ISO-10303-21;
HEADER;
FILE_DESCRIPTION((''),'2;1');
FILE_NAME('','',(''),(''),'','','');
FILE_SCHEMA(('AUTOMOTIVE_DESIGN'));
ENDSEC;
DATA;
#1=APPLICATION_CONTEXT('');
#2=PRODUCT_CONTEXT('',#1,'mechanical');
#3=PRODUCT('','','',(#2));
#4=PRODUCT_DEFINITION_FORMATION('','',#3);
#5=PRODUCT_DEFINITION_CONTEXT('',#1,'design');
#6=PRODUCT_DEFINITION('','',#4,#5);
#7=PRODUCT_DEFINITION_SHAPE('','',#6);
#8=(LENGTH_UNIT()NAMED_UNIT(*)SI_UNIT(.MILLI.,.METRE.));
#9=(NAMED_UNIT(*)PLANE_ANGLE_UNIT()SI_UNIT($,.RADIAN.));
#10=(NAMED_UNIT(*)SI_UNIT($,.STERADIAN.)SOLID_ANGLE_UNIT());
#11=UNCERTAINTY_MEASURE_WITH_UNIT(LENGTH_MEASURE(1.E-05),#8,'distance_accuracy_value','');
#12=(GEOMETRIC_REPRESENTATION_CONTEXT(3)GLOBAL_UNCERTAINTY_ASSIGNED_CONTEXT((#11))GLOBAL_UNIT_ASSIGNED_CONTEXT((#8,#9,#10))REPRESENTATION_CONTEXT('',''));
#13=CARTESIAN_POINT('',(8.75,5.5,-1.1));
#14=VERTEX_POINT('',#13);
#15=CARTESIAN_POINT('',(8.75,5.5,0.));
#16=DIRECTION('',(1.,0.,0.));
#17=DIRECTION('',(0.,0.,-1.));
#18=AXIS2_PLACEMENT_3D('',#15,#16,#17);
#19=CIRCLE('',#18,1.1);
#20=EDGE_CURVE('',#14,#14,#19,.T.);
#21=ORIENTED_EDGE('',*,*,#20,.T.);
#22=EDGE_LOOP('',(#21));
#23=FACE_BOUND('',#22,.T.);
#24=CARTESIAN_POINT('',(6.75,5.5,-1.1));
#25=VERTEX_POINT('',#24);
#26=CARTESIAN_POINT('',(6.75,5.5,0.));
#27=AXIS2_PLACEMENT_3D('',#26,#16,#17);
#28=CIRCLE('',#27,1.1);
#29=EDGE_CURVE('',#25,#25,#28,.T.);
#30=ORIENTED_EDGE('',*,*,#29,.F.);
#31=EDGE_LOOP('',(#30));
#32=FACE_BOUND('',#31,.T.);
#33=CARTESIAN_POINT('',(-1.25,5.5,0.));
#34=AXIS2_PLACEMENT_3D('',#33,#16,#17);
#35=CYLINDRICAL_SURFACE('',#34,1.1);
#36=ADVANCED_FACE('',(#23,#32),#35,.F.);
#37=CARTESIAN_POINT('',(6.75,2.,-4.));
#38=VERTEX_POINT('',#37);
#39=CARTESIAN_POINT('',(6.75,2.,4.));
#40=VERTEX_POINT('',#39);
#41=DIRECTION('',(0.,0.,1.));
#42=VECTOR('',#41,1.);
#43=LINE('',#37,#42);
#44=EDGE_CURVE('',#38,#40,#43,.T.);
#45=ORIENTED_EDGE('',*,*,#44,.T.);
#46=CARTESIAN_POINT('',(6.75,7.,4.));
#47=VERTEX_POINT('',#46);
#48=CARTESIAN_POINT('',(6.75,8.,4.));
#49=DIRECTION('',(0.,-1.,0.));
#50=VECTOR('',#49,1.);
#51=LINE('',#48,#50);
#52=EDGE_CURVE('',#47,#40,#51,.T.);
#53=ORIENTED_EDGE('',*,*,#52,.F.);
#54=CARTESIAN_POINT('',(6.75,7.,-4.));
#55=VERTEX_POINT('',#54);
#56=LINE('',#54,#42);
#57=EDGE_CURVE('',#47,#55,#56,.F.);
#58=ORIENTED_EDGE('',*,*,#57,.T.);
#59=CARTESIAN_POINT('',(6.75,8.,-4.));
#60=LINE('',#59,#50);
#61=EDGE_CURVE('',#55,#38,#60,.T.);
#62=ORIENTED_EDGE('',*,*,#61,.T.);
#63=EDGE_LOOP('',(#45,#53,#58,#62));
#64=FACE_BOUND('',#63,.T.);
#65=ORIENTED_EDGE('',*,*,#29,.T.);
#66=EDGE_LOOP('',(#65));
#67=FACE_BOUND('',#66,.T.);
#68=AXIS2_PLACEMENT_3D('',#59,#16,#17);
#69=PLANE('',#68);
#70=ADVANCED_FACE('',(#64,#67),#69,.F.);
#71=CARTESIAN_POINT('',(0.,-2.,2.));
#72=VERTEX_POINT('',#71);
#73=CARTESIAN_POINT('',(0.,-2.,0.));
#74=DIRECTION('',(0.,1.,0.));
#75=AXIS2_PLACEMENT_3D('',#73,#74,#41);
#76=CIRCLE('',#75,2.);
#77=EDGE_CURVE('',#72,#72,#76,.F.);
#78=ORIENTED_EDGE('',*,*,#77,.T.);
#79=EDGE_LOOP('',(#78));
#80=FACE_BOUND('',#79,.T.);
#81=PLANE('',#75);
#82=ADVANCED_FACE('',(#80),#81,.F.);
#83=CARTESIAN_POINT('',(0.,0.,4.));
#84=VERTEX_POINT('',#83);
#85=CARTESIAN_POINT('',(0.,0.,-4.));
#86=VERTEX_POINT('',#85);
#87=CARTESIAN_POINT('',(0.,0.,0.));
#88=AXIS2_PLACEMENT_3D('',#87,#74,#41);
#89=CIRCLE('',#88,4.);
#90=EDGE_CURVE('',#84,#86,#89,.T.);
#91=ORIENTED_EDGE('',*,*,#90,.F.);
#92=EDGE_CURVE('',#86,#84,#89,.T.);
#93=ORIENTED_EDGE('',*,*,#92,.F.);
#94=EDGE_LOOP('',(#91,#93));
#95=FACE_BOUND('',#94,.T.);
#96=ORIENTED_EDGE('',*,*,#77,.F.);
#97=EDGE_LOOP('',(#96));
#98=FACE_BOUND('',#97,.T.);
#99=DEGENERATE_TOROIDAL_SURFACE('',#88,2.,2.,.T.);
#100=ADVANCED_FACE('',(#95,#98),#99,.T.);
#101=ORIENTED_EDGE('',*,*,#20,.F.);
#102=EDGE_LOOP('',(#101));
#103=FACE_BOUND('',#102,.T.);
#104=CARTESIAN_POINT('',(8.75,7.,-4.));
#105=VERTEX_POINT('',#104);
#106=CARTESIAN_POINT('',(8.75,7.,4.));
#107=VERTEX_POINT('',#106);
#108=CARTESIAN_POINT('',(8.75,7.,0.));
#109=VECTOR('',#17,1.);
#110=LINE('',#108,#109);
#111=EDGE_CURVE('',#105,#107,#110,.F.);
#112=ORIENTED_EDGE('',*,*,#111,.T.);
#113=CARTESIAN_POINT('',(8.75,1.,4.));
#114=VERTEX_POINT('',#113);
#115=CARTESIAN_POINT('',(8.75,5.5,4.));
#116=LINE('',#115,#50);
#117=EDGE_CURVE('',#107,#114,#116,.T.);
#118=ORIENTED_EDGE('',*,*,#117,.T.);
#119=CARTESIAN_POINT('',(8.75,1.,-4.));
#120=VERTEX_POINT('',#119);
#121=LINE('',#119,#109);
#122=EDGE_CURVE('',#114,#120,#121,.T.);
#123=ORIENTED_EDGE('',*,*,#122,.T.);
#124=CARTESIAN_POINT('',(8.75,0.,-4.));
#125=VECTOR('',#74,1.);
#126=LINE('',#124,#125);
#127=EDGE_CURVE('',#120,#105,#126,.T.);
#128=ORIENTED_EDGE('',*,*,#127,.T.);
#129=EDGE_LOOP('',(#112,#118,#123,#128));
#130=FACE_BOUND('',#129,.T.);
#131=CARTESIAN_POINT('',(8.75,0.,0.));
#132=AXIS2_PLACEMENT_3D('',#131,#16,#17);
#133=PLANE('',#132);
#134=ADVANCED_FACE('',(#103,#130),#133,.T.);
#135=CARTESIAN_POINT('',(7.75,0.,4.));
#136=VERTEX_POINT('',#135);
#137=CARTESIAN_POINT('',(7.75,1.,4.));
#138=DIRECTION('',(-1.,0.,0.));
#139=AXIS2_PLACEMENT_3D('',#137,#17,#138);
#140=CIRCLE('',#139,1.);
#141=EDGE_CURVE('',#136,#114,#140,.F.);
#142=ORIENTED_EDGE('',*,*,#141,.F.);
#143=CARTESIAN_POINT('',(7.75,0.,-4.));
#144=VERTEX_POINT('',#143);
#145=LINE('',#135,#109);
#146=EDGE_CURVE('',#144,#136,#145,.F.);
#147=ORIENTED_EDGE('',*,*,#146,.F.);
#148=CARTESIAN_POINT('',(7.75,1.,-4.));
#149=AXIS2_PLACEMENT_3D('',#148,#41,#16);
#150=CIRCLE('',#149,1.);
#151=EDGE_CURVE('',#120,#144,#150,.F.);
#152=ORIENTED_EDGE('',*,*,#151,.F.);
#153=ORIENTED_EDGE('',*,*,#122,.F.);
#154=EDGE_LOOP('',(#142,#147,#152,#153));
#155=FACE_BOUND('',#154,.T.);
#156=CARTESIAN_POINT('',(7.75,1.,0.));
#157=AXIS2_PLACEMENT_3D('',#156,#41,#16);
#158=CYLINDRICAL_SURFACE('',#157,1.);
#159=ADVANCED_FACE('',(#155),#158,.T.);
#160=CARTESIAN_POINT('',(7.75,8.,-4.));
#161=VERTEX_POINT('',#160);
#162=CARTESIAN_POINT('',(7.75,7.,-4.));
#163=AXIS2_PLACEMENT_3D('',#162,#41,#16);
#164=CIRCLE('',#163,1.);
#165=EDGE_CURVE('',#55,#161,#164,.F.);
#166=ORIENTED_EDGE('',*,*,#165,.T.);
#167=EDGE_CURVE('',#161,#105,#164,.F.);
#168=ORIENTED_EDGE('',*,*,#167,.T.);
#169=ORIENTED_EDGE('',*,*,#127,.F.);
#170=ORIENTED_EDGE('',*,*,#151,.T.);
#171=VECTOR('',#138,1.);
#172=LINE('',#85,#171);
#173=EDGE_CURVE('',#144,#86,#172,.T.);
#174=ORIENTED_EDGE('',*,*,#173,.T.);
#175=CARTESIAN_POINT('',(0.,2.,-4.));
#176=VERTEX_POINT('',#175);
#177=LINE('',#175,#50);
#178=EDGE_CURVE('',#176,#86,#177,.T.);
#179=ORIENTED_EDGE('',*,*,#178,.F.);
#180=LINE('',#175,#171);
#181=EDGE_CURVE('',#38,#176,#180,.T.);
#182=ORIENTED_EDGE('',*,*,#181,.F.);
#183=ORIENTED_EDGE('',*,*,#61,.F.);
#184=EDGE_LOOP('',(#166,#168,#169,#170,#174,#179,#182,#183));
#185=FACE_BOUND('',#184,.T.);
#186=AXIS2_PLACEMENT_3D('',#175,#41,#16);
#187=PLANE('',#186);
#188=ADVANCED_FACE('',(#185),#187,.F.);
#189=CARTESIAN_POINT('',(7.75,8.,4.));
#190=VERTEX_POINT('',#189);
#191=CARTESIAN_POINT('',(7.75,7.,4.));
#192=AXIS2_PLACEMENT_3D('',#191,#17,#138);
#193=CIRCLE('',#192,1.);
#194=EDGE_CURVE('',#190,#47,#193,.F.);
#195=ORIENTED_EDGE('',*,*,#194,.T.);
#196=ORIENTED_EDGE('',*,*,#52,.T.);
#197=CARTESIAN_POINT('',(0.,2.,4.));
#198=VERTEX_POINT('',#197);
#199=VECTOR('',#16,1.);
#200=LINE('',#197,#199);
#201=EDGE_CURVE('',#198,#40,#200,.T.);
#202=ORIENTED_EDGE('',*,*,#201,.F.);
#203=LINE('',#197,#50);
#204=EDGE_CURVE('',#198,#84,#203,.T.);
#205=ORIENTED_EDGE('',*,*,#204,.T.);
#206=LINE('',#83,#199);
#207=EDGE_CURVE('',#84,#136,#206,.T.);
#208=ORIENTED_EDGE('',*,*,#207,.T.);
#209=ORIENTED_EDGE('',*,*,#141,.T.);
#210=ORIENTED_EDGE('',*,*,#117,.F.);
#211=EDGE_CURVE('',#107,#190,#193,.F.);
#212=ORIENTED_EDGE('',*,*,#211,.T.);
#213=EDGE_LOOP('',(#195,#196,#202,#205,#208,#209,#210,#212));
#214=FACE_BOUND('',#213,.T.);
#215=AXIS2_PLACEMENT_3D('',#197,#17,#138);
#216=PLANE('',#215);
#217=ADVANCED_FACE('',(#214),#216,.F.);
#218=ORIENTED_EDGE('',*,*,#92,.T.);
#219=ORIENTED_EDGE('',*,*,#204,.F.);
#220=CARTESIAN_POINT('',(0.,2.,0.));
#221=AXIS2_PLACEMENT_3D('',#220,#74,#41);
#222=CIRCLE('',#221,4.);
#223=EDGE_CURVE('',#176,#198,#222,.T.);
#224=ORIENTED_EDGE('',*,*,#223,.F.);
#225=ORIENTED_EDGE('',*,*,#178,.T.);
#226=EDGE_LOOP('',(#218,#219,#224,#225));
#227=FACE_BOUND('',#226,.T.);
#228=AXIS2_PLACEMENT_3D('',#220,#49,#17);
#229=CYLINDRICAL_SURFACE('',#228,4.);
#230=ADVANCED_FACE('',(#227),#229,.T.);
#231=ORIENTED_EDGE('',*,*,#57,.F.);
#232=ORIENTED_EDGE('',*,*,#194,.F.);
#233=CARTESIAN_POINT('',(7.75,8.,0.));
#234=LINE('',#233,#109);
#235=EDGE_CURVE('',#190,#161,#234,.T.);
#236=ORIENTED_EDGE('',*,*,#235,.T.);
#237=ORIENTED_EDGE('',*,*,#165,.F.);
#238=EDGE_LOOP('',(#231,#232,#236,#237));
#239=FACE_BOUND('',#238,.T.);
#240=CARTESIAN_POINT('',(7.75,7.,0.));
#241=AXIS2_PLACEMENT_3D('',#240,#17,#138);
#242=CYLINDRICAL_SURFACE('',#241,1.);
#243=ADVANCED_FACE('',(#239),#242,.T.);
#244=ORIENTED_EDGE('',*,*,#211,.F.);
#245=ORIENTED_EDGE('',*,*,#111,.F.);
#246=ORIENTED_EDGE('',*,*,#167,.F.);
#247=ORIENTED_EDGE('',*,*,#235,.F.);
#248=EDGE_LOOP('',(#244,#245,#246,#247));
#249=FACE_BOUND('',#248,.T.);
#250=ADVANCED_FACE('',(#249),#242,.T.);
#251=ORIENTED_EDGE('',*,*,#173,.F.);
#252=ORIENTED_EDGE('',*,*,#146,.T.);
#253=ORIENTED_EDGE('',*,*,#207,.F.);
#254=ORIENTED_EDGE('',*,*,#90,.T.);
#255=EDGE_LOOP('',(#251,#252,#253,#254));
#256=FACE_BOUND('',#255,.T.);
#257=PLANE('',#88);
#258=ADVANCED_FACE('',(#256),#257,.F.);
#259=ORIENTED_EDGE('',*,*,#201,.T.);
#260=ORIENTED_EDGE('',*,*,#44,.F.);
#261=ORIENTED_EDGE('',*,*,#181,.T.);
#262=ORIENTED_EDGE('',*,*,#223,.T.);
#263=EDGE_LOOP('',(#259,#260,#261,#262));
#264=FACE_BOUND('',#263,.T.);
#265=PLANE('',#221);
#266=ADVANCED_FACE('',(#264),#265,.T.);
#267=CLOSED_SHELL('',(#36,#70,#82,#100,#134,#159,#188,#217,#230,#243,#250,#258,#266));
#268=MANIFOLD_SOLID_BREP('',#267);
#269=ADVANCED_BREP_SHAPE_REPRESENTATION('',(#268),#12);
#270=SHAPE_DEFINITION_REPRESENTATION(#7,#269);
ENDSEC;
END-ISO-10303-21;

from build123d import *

# Parameters (mm, degrees)
SKETCH_1_R          = 2.525
EXTRUDE_1_DEPTH     = 2
EXTRUDE_START       = -2
SKETCH_2_R          = 2.525
EXTRUDE_2_DEPTH     = 2
SKETCH_3_R          = 4
EXTRUDE_3_DEPTH     = 2
EXTRUDE_6_DEPTH     = 8
SKETCH_11_R         = 1.05
CUT_EXTRUDE_1_DEPTH = 28.51931143
FILLET_3_R          = 1
SKETCH_12_W         = 8
SKETCH_12_H         = 5.5
CUT_EXTRUDE_2_DEPTH = 17
SKETCH_13_W         = 2
SKETCH_13_H         = 8
EXTRUDE_7_DEPTH     = 6
FILLET_4_R          = 1
FILLET_5_R          = 1
SKETCH_14_R         = 1.1
CUT_EXTRUDE_3_DEPTH = 10


with BuildPart() as part:
    # 草图1 → 凸台-拉伸1 (new body)
    with BuildSketch(Plane(origin=(0, 0, 0), x_dir=(1, 0, 0), z_dir=(0, 1, 0))):
        with BuildLine():
            Line((0, 4), (25.75, 4))
            Line((25.75, 4), (25.75, -4))
            Line((25.75, -4), (0, -4))
            ThreePointArc((0, -4), (-4, 0), (0, 4))
        make_face()
        with Locations(Location((0, 0, 0), (0, 0, 270))):
            Circle(SKETCH_1_R, mode=Mode.SUBTRACT)
    extrude(amount=EXTRUDE_1_DEPTH)

    # 草图2 → 凸台-拉伸2 (add)
    with BuildSketch(Plane(origin=(0, 2, 0), x_dir=(1, 0, 0), z_dir=(0, 1, 0)).offset(EXTRUDE_START)):
        Circle(SKETCH_2_R)
    extrude(amount=EXTRUDE_2_DEPTH)

    # 草图3 → 凸台-拉伸3 (add)
    with BuildSketch(Plane(origin=(0, 0, 0), x_dir=(1, 0, 0), z_dir=(0, 1, 0)).offset(EXTRUDE_START)):
        with Locations(Location((0, 0, 0), (0, 0, 270))):
            Circle(SKETCH_3_R)
    extrude(amount=EXTRUDE_3_DEPTH)

    # 圆角2: read off the stored shape, not the designer's step
    # 圆角2 outline → 圆角2 (revolve, cut)
    with BuildSketch(Plane.XY):
        with BuildLine():
            ThreePointArc((4, 0), (3.414213562, -1.414213562), (2, -2))
            Line((2, -2), (4, -2))
            Line((4, -2), (4, 0))
        make_face()
    revolve(axis=Axis((0, 0, 0), (0, 1, 0)), mode=Mode.SUBTRACT)

    # 草图10 → 凸台-拉伸6 (add)
    with BuildSketch(Plane(origin=(0, 0, -4), x_dir=(-1, 0, 0), z_dir=(0, 0, -1))):
        with BuildLine():
            Line((-25.75, 2), (-25.75, 4))
            ThreePointArc((-25.75, 4), (-24.25, 5.5), (-22.75, 4))
            Line((-22.75, 4), (-22.75, 2))
            Line((-22.75, 2), (-25.75, 2))
        make_face()
        with BuildLine():
            Line((-18.75, 2), (-15.75, 2))
            Line((-15.75, 2), (-15.75, 4))
            ThreePointArc((-15.75, 4), (-17.25, 5.5), (-18.75, 4))
            Line((-18.75, 4), (-18.75, 2))
        make_face()
    extrude(amount=-EXTRUDE_6_DEPTH)

    # 草图11 → 切除-拉伸1 (cut, through all)
    with BuildSketch(Plane(origin=(0, 0, -4), x_dir=(-1, 0, 0), z_dir=(0, 0, -1))):
        with Locations((-17.25, 4)):
            Circle(SKETCH_11_R)
        with Locations((-24.25, 4)):
            Circle(SKETCH_11_R)
    extrude(amount=-CUT_EXTRUDE_1_DEPTH, mode=Mode.SUBTRACT)

    # 圆角3
    fillet_3_edges = [part.edges().sort_by_distance(p)[0] for p in [
        (25.75, 0, 0),
    ]]
    fillet(fillet_3_edges, radius=FILLET_3_R)

    # 草图12 → 切除-拉伸2 (cut)
    with BuildSketch(Plane(origin=(25.75, 0, 0), x_dir=(0, 0, -1), z_dir=(1, 0, 0))):
        with Locations((0, 2.75)):
            Rectangle(SKETCH_12_W, SKETCH_12_H)
    extrude(amount=-CUT_EXTRUDE_2_DEPTH, mode=Mode.SUBTRACT)

    # 草图13 → 凸台-拉伸7 (add)
    with BuildSketch(Plane(origin=(0, 2, 0), x_dir=(1, 0, 0), z_dir=(0, 1, 0))):
        with Locations((7.75, 0)):
            Rectangle(SKETCH_13_W, SKETCH_13_H)
    extrude(amount=EXTRUDE_7_DEPTH)

    # 圆角4
    fillet_4_edges = [part.edges().sort_by_distance(p)[0] for p in [
        (8.75, 0, 0),
    ]]
    fillet(fillet_4_edges, radius=FILLET_4_R)

    # 圆角5
    fillet_5_edges = [part.edges().sort_by_distance(p)[0] for p in [
        (6.75, 8, 0),
        (8.75, 8, 0),
    ]]
    fillet(fillet_5_edges, radius=FILLET_5_R - 0.0001)  # a hair under: the kernel refuses the full size

    # 草图14 → 切除-拉伸3 (cut)
    with BuildSketch(Plane(origin=(8.75, 0, 0), x_dir=(0, 0, -1), z_dir=(1, 0, 0))):
        with Locations((0, 5.5)):
            Circle(SKETCH_14_R)
    extrude(amount=-CUT_EXTRUDE_3_DEPTH, mode=Mode.SUBTRACT)


solid = part.part
